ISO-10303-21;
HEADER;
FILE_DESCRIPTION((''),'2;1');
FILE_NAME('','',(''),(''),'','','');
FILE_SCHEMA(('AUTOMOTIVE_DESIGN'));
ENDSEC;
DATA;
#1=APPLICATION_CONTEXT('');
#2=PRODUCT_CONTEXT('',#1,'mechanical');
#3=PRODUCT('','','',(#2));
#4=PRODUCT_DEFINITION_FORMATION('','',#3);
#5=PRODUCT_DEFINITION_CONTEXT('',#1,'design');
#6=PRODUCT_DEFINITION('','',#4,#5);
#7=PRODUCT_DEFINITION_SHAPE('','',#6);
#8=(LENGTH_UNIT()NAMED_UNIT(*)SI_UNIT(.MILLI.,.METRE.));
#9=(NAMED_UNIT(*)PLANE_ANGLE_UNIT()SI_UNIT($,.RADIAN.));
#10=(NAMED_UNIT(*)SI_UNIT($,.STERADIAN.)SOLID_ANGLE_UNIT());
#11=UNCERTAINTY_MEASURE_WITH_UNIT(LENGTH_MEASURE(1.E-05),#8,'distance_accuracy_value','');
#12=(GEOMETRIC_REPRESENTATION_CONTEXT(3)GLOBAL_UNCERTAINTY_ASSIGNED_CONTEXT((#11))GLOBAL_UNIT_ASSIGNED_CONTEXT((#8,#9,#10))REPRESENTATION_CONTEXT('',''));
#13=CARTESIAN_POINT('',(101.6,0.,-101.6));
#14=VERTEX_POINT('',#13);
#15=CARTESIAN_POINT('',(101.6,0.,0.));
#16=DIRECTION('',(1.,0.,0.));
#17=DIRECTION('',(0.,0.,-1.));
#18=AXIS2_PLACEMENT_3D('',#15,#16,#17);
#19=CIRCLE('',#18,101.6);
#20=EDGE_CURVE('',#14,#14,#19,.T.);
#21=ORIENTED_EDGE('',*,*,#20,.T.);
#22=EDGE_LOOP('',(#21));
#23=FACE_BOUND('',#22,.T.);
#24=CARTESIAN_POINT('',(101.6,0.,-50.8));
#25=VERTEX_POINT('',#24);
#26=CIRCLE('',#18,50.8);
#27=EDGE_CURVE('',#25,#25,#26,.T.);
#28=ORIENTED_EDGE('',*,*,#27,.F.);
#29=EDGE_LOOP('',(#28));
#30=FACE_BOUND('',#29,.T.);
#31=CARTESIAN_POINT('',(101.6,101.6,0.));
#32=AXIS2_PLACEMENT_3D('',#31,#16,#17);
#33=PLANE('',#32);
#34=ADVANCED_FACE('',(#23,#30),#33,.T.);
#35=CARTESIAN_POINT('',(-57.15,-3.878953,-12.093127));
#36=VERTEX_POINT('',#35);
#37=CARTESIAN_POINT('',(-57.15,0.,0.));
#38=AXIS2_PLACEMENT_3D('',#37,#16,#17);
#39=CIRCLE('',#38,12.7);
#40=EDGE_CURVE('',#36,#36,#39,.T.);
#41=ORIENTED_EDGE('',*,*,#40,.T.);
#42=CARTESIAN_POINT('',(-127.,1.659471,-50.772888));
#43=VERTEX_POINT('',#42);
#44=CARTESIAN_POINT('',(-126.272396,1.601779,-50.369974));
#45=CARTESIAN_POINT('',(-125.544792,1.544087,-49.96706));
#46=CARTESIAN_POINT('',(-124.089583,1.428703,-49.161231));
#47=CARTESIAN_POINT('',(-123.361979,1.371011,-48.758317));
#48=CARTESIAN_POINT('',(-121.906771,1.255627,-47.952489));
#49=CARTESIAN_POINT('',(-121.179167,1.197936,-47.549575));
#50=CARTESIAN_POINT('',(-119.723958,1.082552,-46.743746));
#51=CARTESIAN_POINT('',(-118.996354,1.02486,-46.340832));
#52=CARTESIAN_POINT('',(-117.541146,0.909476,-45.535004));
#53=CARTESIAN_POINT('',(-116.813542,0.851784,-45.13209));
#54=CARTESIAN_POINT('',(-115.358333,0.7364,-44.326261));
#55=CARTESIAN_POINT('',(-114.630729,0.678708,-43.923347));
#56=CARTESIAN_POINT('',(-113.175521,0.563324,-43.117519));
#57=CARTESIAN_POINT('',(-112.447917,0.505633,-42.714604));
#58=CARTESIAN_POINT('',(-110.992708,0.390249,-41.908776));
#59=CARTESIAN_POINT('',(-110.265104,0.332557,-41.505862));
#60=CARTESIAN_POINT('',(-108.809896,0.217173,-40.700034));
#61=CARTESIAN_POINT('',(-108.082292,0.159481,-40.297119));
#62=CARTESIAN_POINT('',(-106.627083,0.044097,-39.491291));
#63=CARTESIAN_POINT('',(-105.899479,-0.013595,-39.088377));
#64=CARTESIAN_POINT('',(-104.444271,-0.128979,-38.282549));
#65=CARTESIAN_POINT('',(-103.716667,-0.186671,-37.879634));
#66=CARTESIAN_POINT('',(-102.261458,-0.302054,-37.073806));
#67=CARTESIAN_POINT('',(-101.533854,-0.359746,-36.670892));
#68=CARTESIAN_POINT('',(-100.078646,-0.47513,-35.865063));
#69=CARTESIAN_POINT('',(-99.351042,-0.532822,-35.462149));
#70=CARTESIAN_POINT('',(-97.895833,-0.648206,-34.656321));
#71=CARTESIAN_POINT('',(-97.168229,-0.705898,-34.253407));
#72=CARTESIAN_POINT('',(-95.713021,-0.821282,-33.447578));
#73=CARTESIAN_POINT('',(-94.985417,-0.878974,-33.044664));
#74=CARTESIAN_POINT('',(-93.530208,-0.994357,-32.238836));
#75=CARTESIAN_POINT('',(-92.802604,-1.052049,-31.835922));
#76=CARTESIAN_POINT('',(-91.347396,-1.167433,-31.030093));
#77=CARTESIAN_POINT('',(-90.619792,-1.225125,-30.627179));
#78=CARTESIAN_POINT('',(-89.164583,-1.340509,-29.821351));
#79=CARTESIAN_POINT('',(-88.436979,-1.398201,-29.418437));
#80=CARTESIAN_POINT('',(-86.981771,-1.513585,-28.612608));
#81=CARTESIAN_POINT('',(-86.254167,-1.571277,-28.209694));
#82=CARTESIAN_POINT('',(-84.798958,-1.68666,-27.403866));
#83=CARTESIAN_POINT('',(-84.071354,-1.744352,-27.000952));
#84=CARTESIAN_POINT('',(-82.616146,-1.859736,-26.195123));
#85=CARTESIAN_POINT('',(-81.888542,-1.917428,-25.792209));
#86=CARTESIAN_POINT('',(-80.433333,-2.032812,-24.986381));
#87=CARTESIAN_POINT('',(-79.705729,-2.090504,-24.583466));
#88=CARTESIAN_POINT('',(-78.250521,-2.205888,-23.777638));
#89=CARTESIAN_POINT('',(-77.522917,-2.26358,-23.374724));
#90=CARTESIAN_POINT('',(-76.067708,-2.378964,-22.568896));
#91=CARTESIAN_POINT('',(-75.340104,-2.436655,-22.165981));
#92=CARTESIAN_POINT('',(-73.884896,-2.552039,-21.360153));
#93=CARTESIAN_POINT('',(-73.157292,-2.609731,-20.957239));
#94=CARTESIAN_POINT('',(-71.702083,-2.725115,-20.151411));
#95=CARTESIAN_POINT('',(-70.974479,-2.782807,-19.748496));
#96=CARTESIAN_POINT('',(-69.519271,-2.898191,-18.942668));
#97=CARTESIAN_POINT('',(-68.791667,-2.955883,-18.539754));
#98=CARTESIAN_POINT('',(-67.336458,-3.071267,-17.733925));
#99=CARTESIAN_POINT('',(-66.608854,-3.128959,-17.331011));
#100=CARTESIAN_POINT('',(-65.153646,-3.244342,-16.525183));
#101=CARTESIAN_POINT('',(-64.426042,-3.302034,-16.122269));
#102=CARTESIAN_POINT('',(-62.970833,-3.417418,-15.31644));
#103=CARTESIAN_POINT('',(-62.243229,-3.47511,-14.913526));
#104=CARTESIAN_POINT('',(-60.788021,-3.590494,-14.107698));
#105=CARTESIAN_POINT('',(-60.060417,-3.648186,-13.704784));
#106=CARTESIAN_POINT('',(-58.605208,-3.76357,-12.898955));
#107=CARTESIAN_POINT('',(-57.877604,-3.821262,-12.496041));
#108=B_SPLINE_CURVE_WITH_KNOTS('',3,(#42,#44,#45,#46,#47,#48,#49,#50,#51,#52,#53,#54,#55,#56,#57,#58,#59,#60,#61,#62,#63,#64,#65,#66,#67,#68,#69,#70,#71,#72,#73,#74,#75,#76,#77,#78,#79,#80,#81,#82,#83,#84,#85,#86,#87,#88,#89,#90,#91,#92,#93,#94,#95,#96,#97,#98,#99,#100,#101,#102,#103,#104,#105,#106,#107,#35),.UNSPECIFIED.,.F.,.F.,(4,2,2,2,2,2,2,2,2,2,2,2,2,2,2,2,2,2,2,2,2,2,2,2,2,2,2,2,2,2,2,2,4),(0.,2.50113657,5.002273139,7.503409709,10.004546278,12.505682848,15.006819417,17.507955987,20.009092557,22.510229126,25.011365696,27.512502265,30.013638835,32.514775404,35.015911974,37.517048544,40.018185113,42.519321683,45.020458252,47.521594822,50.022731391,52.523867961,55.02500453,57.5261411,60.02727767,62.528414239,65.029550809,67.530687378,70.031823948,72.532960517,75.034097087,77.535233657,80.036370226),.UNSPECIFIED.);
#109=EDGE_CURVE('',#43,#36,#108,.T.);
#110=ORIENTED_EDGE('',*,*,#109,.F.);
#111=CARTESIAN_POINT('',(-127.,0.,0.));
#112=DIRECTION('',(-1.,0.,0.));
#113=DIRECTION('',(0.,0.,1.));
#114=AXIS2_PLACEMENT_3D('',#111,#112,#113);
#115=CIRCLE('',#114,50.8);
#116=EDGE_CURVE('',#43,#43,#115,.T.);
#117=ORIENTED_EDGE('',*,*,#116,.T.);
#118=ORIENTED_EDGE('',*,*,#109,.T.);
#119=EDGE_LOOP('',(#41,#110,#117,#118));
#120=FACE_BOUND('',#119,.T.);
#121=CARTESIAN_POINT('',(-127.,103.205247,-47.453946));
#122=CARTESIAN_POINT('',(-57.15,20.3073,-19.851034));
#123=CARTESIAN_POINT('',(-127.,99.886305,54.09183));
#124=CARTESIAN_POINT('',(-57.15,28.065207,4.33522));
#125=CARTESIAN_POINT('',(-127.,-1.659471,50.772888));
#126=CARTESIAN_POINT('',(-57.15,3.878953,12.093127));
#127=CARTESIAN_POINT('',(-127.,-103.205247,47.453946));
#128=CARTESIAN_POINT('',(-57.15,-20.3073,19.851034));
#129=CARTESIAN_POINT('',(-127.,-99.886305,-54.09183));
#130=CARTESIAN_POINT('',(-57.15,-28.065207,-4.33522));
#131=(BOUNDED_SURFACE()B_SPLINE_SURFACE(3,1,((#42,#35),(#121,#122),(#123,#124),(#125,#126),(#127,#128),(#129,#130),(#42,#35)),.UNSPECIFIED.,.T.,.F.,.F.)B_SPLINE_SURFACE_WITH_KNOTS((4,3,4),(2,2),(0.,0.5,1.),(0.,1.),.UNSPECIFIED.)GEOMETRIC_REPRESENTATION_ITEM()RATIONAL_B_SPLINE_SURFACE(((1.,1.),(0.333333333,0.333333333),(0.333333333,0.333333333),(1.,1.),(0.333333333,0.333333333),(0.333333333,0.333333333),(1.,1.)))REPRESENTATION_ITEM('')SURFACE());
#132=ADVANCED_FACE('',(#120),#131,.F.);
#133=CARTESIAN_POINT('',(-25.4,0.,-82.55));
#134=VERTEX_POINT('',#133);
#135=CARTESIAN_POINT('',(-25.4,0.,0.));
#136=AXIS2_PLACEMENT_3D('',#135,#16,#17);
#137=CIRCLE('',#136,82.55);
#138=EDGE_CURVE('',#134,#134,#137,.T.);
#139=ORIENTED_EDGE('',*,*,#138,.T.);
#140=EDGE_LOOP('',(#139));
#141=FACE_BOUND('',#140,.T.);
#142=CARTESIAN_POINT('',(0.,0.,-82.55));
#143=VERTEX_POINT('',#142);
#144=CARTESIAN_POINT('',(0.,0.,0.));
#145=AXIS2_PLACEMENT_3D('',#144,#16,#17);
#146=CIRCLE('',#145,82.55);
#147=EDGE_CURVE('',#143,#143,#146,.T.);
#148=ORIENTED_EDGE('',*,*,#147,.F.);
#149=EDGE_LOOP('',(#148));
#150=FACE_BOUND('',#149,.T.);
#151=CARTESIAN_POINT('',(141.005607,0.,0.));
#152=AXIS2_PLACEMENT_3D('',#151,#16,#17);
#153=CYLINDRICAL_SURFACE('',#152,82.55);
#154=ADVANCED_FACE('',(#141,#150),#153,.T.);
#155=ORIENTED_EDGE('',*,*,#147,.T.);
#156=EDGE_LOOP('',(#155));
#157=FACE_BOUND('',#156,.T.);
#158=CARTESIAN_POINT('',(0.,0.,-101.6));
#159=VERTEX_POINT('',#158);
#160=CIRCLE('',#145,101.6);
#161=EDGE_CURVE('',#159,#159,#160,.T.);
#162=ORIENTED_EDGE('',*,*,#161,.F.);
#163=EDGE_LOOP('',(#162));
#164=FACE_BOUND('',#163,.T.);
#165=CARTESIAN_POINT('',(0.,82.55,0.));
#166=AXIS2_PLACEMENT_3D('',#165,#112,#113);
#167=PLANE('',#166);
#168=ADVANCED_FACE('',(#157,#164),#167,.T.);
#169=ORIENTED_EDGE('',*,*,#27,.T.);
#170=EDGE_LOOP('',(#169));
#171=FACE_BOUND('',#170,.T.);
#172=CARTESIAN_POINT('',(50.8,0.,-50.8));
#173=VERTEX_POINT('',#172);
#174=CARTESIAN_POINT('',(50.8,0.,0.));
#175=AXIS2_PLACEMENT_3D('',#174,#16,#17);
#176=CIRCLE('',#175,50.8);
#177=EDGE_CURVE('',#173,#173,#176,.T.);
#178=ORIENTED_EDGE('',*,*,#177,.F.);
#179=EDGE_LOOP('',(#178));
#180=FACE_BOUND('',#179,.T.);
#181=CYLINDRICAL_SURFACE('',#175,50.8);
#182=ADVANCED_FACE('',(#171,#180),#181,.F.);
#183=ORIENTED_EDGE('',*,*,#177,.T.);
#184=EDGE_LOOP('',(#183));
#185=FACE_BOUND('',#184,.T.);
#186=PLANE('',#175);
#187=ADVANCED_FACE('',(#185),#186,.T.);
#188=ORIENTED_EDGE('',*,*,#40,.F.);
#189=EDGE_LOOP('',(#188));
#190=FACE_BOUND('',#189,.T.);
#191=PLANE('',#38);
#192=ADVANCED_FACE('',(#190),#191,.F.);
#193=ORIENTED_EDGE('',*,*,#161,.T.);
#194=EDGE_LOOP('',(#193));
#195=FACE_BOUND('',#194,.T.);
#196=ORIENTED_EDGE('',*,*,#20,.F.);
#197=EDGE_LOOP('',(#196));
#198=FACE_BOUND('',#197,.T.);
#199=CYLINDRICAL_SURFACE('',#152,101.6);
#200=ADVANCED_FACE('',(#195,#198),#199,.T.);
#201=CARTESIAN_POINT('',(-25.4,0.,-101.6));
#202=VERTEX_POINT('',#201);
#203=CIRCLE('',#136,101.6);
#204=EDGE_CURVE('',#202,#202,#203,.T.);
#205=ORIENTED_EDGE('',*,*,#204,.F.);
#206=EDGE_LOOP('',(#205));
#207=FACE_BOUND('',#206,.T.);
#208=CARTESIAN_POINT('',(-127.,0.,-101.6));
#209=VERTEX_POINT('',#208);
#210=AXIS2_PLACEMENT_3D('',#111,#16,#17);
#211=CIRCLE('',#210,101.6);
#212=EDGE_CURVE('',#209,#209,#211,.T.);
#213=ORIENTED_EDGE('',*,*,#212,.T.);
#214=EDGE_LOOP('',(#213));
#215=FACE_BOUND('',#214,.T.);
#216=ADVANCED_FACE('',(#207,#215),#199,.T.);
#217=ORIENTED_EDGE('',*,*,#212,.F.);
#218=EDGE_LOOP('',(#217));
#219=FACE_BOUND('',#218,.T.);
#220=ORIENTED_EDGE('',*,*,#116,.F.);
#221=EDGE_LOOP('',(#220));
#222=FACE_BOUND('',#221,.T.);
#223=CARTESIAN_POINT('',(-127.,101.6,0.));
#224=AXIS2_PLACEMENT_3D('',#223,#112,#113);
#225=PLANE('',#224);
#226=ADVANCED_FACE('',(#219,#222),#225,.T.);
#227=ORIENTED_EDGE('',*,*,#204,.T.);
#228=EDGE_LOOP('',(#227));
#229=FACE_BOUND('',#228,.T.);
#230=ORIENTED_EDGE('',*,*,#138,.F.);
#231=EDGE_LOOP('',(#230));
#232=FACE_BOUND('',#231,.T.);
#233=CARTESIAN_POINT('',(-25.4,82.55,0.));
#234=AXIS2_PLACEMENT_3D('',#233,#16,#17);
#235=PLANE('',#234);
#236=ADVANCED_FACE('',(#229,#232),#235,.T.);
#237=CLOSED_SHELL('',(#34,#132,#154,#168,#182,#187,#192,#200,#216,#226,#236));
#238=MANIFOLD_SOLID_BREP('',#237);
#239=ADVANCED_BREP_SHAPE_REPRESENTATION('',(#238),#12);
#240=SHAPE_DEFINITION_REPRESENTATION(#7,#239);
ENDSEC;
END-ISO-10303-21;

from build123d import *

# Parameters (mm, degrees)
SKETCH8_R          = 50.8
CUT_EXTRUDE3_DEPTH = 50.8


with BuildPart() as part:
    # Sketch1 → Revolve2 (revolve)
    with BuildSketch(Plane.XY, mode=Mode.PRIVATE) as revolve2_sk:
        Polygon((0, 101.6), (101.6, 101.6), (101.6, 0), (0, 0), (-25.4, 0), (-127, 0), (-127, 101.6), (-25.4, 101.6), (-25.4, 82.55), (0, 82.55), align=None)
    revolve(revolve2_sk.sketch.rotate(Axis((141.005607477, 0, 0), (-1, 0, 0)), 90), axis=Axis((141.005607477, 0, 0), (-1, 0, 0)))

    # Sketch8 → Cut-Extrude3 (cut)
    with BuildSketch(Plane(origin=(101.6, 0, 0), x_dir=(0, 0, -1), z_dir=(1, 0, 0))):
        Circle(SKETCH8_R)
    extrude(amount=-CUT_EXTRUDE3_DEPTH, mode=Mode.SUBTRACT)

    # Cut-Loft1: read off the stored shape, not the designer's step
    # Cut-Loft1: loft between two sections, ruled curve by curve
    cut_loft1_from = [
        Edge.make_bspline([(-127, 1.659470947, -50.772888003), (-127, 103.205246954, -47.453946108), (-127, 99.886305059, 54.091829898), (-127, -1.659470947, 50.772888003), (-127, -103.205246954, 47.453946108), (-127, -99.886305059, -54.091829898), (-127, 1.659470947, -50.772888003)], [0, 0, 0, 0, 0.5, 0.5, 0.5, 1, 1, 1, 1], 3, [1, 0.333333333, 0.333333333, 1, 0.333333333, 0.333333333, 1]),
    ]
    cut_loft1_to = [
        Edge.make_bspline([(-57.15, -3.878953486, -12.093126967), (-57.15, 20.307300449, -19.85103394), (-57.15, 28.065207421, 4.335219995), (-57.15, 3.878953486, 12.093126967), (-57.15, -20.307300449, 19.85103394), (-57.15, -28.065207421, -4.335219995), (-57.15, -3.878953486, -12.093126967)], [0, 0, 0, 0, 0.5, 0.5, 0.5, 1, 1, 1, 1], 3, [1, 0.333333333, 0.333333333, 1, 0.333333333, 0.333333333, 1]),
    ]
    cut_loft1 = Solid(Shell([*[Face.make_surface_from_curves(cut_loft1_from[k], cut_loft1_to[k]) for k in range(1)], Face(Wire(cut_loft1_from)), Face(Wire(cut_loft1_to))]))
    add(cut_loft1, mode=Mode.SUBTRACT)


solid = part.part
